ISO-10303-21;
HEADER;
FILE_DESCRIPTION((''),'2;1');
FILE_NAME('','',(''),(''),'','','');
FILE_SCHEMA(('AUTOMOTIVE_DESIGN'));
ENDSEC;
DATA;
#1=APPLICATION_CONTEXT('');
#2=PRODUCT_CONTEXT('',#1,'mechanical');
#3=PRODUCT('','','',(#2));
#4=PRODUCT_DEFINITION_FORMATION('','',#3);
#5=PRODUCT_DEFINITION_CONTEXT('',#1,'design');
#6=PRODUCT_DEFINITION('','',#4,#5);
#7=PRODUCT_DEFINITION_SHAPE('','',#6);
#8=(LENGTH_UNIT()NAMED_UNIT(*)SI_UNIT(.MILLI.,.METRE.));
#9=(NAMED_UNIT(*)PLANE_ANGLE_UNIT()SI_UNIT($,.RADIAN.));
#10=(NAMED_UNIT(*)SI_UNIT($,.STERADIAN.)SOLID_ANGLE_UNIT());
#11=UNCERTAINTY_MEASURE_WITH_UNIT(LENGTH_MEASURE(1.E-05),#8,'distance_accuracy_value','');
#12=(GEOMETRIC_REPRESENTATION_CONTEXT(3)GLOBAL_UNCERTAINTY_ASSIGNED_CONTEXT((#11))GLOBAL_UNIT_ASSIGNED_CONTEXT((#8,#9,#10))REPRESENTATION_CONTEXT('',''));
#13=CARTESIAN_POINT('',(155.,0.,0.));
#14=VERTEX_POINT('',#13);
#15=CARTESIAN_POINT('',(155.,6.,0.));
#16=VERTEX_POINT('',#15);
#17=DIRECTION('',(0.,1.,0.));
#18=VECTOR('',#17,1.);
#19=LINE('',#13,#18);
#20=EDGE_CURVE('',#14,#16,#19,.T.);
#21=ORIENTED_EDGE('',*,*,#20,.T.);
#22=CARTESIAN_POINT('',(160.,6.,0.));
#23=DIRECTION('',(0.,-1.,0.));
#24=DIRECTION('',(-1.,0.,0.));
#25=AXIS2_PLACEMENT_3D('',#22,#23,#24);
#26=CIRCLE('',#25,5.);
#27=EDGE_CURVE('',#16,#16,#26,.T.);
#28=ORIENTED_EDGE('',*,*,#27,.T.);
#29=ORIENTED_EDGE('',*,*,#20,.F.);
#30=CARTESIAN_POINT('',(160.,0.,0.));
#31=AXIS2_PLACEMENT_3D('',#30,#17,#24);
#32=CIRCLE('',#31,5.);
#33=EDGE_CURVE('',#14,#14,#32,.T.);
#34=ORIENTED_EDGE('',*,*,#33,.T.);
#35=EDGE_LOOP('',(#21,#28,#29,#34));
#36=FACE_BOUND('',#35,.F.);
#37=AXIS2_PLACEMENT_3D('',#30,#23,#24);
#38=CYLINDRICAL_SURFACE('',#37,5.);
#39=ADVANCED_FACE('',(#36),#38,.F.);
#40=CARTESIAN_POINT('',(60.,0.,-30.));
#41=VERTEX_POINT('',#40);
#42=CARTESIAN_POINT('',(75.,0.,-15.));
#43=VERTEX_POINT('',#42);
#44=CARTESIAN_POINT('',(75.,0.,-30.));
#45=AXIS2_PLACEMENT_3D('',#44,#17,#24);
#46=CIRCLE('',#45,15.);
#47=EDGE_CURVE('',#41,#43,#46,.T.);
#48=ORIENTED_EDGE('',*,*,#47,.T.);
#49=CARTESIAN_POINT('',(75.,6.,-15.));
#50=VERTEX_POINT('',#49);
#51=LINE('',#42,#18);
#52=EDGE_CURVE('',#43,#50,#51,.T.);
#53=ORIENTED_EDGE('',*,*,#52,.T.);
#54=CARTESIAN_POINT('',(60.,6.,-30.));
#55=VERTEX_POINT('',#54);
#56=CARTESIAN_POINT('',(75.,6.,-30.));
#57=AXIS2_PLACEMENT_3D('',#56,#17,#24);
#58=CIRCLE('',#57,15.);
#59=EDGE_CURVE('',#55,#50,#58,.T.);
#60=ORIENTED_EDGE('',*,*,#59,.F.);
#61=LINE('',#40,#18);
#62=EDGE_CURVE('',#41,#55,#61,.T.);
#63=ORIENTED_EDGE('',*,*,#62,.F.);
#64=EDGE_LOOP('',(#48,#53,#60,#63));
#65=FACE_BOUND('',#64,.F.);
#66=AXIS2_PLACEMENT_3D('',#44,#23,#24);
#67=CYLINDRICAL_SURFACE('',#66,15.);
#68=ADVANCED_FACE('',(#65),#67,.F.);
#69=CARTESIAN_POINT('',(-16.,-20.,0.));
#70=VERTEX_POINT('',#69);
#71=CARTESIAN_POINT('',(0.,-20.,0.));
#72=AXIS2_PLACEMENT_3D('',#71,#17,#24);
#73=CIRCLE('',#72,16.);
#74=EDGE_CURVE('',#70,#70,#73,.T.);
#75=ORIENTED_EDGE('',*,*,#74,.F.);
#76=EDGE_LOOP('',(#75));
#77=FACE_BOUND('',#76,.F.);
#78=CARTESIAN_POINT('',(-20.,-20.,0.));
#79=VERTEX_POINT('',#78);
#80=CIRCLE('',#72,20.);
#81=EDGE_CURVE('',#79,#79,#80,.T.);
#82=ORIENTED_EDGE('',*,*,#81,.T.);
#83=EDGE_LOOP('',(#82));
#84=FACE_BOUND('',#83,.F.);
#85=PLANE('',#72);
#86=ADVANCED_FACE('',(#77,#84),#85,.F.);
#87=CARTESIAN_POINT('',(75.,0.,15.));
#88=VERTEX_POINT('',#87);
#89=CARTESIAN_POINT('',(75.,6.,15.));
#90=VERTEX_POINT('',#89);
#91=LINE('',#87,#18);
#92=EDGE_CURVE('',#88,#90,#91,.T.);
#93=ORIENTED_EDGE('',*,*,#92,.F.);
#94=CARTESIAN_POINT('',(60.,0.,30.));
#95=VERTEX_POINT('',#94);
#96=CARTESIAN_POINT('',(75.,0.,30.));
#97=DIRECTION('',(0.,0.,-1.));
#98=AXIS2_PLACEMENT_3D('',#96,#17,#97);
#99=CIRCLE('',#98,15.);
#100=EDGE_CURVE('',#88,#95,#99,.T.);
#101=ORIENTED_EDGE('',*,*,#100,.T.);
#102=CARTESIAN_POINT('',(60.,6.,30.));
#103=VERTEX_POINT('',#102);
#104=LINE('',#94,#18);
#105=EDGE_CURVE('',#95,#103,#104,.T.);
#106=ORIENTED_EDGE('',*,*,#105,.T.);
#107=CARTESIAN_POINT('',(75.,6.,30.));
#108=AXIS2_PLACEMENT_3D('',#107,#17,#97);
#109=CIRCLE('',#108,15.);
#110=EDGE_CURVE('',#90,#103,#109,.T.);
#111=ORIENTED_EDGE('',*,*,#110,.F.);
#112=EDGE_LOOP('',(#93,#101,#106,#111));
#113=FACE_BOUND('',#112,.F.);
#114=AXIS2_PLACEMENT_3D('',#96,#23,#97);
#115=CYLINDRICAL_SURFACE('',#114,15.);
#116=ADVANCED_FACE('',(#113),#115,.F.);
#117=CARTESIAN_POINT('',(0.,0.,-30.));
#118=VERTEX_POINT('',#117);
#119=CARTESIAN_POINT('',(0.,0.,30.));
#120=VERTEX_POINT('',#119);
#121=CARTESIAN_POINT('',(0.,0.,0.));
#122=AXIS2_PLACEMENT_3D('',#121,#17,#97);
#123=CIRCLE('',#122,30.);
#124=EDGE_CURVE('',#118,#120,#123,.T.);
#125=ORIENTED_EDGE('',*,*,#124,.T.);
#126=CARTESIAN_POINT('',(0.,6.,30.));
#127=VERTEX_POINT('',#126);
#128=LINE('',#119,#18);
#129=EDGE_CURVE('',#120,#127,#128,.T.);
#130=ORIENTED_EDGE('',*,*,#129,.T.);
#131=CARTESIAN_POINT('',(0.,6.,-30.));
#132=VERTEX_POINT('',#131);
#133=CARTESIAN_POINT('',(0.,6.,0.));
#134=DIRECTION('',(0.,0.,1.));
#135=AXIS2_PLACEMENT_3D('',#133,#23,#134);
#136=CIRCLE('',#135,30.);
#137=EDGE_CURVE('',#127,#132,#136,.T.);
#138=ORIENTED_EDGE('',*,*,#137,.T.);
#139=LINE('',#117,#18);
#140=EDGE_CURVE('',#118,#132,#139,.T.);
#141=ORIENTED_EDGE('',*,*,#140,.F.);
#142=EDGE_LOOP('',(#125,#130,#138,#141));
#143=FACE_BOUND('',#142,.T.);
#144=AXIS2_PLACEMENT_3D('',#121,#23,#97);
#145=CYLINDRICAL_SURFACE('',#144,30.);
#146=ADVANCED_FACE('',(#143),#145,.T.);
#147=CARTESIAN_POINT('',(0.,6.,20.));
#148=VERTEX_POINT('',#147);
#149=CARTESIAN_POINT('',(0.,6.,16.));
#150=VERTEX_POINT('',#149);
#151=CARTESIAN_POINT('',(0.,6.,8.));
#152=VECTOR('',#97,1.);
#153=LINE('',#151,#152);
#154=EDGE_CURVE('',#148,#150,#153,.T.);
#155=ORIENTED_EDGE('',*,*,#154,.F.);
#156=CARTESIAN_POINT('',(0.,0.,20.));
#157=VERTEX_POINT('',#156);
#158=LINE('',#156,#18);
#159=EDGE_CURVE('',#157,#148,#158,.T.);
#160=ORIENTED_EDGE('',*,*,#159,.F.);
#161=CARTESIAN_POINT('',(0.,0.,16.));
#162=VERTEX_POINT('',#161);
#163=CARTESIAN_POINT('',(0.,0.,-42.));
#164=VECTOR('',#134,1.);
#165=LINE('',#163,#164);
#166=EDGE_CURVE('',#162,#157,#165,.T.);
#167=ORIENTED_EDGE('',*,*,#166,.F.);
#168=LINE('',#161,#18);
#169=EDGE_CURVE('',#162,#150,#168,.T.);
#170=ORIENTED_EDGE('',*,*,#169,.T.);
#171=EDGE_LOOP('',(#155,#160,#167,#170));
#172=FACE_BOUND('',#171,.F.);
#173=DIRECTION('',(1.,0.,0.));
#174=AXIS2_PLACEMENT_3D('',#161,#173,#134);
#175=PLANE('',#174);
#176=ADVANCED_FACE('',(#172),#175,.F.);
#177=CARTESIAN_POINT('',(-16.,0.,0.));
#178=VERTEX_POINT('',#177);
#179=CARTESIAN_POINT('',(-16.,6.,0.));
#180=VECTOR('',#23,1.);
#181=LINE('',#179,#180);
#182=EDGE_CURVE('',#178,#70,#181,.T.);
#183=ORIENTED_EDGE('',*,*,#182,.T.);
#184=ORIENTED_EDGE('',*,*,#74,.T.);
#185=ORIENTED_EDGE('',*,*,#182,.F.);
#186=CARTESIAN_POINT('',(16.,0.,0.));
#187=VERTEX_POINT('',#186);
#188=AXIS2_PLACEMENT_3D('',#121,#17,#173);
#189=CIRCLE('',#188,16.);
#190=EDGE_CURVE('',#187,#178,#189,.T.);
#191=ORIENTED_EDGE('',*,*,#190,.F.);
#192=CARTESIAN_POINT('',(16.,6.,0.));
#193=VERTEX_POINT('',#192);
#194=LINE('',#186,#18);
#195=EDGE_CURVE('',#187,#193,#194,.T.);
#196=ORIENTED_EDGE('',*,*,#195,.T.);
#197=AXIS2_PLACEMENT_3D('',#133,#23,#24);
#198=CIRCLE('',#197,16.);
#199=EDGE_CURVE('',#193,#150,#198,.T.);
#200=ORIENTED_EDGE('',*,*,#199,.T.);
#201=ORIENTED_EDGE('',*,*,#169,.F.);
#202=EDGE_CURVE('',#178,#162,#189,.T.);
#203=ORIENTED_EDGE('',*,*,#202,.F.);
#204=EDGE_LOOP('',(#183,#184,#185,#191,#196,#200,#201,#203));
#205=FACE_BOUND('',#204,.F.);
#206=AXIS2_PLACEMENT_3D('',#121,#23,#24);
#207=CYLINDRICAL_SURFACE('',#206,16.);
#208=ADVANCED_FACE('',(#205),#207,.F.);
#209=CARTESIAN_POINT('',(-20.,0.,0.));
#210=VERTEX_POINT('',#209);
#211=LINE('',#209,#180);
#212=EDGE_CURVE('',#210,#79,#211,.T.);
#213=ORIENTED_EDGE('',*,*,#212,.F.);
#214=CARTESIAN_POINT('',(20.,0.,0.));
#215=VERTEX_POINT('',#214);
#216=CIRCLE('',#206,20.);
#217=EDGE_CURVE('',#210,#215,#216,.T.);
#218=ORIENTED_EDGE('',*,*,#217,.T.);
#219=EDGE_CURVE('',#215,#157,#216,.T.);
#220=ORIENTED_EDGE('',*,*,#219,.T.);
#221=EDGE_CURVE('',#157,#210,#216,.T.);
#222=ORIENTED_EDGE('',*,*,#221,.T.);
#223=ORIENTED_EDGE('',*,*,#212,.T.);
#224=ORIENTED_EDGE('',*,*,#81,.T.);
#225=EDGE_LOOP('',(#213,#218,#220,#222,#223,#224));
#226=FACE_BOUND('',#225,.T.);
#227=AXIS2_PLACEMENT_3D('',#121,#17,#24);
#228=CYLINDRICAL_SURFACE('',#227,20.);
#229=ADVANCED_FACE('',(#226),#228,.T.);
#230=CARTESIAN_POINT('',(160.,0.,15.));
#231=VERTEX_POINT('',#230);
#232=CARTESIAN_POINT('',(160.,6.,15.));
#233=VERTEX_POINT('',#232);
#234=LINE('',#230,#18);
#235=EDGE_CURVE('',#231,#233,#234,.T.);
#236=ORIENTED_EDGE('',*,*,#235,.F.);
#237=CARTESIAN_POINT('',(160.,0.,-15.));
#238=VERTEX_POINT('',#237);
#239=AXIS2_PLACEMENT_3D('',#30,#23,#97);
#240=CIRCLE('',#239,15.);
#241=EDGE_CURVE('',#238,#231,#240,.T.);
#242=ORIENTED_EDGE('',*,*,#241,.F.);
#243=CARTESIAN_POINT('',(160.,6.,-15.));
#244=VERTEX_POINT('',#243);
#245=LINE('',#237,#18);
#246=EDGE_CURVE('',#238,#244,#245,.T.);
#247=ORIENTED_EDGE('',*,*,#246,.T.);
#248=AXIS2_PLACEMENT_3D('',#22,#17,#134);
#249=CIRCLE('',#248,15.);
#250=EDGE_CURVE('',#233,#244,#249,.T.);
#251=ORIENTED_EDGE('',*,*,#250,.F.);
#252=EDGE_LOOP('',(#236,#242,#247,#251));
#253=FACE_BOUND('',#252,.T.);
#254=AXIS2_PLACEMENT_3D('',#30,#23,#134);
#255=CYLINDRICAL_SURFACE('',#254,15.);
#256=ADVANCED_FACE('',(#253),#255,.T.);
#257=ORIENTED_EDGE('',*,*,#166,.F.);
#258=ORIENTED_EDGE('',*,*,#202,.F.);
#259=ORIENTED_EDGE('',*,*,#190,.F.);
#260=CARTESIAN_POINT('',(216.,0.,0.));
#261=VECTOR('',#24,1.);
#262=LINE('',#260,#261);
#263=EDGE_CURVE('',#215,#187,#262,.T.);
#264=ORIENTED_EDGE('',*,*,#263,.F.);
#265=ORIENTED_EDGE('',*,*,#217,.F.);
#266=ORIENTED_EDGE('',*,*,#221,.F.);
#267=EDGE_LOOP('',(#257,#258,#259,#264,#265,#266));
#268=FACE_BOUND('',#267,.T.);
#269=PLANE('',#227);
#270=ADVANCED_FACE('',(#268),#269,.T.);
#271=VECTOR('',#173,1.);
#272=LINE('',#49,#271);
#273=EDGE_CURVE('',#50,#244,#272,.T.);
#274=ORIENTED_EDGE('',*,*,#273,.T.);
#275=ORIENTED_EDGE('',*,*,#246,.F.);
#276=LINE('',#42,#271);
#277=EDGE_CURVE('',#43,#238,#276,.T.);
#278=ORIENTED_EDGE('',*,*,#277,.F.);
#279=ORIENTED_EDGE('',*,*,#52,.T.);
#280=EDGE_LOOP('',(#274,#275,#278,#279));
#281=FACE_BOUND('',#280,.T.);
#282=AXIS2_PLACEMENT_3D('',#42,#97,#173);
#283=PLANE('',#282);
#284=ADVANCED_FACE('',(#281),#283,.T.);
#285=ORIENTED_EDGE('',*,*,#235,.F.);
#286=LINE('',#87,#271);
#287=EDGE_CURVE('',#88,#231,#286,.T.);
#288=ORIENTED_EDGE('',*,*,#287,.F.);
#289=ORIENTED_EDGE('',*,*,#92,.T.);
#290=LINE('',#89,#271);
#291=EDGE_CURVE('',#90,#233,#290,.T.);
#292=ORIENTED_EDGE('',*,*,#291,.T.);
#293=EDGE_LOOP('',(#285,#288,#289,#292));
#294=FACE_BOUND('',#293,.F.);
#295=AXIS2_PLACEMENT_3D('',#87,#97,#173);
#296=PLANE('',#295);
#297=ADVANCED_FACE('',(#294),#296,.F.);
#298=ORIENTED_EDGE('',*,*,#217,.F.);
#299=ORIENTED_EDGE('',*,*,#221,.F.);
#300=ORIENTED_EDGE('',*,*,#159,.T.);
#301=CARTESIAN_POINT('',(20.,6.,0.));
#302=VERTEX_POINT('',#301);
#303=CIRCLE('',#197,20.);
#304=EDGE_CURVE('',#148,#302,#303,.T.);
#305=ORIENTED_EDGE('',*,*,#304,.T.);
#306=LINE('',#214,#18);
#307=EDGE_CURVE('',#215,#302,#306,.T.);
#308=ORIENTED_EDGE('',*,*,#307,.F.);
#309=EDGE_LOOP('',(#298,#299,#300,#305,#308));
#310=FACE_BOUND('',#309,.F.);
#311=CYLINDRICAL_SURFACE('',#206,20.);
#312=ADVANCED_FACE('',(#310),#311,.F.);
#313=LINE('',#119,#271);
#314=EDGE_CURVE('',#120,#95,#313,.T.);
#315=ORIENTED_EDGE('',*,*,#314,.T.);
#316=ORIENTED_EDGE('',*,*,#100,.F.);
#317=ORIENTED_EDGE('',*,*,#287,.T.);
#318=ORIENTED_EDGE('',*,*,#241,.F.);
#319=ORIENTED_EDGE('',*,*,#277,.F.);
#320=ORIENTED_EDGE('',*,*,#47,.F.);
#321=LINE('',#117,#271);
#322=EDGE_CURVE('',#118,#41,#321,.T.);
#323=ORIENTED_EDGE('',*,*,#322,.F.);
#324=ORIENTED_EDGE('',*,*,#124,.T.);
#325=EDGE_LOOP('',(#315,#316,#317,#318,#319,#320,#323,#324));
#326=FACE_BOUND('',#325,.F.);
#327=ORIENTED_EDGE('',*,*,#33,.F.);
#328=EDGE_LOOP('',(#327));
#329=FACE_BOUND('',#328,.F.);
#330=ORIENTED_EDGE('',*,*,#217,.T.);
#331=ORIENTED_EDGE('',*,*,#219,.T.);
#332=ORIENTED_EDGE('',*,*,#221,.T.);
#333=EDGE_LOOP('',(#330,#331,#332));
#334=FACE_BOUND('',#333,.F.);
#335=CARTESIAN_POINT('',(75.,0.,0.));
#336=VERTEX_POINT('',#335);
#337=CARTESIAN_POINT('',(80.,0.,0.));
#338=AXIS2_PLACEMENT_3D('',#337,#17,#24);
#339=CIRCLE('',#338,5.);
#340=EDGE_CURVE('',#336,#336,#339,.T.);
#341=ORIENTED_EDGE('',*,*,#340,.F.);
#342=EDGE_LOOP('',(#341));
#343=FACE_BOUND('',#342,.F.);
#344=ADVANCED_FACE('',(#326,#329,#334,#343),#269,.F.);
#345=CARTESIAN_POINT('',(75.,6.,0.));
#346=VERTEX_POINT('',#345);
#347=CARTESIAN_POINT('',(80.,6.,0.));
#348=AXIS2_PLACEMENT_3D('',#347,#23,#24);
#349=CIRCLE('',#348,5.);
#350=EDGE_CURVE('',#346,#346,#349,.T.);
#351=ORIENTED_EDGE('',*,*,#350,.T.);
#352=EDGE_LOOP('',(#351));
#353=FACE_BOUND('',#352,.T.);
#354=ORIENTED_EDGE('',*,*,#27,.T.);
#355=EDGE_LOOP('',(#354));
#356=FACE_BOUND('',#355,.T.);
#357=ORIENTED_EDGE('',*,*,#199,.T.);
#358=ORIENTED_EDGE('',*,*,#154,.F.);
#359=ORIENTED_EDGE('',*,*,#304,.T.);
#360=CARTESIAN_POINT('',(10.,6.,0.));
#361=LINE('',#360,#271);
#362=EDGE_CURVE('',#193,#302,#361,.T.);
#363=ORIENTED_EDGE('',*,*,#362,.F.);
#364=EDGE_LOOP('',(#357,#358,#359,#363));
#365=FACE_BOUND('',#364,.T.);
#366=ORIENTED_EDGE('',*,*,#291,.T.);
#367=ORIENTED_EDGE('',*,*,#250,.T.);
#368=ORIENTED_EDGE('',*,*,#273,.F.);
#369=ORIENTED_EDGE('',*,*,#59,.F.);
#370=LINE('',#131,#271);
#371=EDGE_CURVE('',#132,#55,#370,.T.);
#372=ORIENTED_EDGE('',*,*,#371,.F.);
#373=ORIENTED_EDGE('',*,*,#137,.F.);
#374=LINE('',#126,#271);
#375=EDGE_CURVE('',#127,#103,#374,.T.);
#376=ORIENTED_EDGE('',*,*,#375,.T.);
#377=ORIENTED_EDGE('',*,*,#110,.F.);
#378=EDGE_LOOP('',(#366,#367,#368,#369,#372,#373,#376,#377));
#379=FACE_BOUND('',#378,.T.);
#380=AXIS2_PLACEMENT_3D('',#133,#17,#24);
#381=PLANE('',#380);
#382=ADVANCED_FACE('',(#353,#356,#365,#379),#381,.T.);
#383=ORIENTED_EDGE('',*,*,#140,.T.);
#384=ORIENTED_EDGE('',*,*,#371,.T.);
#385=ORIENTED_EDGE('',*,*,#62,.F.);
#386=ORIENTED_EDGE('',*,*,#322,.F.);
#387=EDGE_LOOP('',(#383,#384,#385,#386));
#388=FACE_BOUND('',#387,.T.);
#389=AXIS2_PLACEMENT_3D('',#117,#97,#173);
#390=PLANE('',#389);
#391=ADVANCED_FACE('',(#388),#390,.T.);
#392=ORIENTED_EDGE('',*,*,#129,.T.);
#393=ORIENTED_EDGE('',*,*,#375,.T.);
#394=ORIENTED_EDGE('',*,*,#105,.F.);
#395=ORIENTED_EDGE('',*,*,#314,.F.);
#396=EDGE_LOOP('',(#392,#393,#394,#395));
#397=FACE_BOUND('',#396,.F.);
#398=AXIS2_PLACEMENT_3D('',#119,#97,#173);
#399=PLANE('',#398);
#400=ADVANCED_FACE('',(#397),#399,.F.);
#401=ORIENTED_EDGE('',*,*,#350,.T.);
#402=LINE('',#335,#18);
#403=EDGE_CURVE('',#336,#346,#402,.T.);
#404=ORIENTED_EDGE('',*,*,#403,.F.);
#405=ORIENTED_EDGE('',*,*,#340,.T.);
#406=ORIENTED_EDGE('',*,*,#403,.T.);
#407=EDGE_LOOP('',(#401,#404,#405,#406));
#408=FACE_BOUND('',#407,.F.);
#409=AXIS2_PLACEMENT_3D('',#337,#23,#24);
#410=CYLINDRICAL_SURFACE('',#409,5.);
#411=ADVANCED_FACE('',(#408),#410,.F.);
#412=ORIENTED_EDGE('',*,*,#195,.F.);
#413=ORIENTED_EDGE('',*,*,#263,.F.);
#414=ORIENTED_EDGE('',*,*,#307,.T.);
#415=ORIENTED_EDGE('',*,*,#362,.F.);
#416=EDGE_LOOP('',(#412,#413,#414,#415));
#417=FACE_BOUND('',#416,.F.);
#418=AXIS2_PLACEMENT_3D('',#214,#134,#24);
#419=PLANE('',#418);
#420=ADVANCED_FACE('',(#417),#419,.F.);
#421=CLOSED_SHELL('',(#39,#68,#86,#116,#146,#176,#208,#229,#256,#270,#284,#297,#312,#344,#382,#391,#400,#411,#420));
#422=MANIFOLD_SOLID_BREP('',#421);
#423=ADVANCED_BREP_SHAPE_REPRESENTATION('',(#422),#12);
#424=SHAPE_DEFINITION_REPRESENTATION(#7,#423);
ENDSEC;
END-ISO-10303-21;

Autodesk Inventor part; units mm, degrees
ref_plane "YZ Plane" through (0, 0, 0) normal (1, 0, 0) x (0, 1, 0)
ref_plane "XZ Plane" through (0, 0, 0) normal (0, 1, 0) x (-1, 0, 0)
ref_plane "XY Plane" through (0, 0, 0) normal (0, 0, 1) x (1, 0, 0)
sketch "Sketch1" plane through (0, 0, 0) normal (0, 1, 0) x (-1, 0, 0)
  line L0 (0, -42) -> (0, 42) projected
  line L1 (-216, 0) -> (71, 0) projected
  circle A0 centre (0, 0) radius 16
  circle A1 centre (0, 0) radius 20
  arc A2 (0, -30) -> (0, 30) centre (0, 0) ccw
  line L2 (0, 30) -> (-60, 30)
  arc A3 (-75, 15) -> (-60, 30) centre (-75, 30) ccw
  line L3 (-75, 15) -> (-160, 15)
  arc A4 (-160, 15) -> (-160, -15) centre (-160, 0) ccw
  line L4 (0, -30) -> (-60, -30)
  arc A5 (-60, -30) -> (-75, -15) centre (-75, -30) ccw
  line L5 (-75, -15) -> (-160, -15)
  circle A6 centre (-160, 0) radius 5
  circle A7 centre (-80, 0) radius 5
  point P0 (0, 20)
  point P1 (0, 16)
  point P2 (-16, 0)
  point P3 (-20, 0)
  dimension "d0" = 30
  dimension "d1" = 40
  dimension "d2" = 4
  dimension "d3" = 10
  dimension "d4" = 80
  dimension "d5" = 60
  dimension "d6" = 160
  dimension "d8" = 15
  dimension "d10" = 15
extrude "Extrusion1" add sketch "Sketch1" along normal blind 6 contours L4 A5 L5 A4 L1 A6 A7 A1 L0 | L0 A1 L1 A2 | A1 L1 A0 L0 | L0 A0 L1 A1 | L1 A1 L0 A2 | A1 L0 A0 L1 | L1 A7 A6 A4 L3 A3 L2 L0 A1 | L1 A0 L0 A1
extrude "Extrusion2" add sketch "Sketch1" against normal blind 20 contours A1 L1 A0 L0 | L0 A0 L1 A1 | A1 L0 A0 L1 | L1 A0 L0 A1
extrude "Extrusion3" cut sketch "Sketch1" along normal through all contours A1 L1 A0 L0 | L0 A0 L1 A1 | L1 A0 L0 A1 | L1 A0 L0 picked at (-18.3658, -2.6703) picked at (17.7056, -5.5628) picked at (18.4995, 1.4835) picked at (-10.5329, 1.1868)
properties part number "Shared Sketch"
